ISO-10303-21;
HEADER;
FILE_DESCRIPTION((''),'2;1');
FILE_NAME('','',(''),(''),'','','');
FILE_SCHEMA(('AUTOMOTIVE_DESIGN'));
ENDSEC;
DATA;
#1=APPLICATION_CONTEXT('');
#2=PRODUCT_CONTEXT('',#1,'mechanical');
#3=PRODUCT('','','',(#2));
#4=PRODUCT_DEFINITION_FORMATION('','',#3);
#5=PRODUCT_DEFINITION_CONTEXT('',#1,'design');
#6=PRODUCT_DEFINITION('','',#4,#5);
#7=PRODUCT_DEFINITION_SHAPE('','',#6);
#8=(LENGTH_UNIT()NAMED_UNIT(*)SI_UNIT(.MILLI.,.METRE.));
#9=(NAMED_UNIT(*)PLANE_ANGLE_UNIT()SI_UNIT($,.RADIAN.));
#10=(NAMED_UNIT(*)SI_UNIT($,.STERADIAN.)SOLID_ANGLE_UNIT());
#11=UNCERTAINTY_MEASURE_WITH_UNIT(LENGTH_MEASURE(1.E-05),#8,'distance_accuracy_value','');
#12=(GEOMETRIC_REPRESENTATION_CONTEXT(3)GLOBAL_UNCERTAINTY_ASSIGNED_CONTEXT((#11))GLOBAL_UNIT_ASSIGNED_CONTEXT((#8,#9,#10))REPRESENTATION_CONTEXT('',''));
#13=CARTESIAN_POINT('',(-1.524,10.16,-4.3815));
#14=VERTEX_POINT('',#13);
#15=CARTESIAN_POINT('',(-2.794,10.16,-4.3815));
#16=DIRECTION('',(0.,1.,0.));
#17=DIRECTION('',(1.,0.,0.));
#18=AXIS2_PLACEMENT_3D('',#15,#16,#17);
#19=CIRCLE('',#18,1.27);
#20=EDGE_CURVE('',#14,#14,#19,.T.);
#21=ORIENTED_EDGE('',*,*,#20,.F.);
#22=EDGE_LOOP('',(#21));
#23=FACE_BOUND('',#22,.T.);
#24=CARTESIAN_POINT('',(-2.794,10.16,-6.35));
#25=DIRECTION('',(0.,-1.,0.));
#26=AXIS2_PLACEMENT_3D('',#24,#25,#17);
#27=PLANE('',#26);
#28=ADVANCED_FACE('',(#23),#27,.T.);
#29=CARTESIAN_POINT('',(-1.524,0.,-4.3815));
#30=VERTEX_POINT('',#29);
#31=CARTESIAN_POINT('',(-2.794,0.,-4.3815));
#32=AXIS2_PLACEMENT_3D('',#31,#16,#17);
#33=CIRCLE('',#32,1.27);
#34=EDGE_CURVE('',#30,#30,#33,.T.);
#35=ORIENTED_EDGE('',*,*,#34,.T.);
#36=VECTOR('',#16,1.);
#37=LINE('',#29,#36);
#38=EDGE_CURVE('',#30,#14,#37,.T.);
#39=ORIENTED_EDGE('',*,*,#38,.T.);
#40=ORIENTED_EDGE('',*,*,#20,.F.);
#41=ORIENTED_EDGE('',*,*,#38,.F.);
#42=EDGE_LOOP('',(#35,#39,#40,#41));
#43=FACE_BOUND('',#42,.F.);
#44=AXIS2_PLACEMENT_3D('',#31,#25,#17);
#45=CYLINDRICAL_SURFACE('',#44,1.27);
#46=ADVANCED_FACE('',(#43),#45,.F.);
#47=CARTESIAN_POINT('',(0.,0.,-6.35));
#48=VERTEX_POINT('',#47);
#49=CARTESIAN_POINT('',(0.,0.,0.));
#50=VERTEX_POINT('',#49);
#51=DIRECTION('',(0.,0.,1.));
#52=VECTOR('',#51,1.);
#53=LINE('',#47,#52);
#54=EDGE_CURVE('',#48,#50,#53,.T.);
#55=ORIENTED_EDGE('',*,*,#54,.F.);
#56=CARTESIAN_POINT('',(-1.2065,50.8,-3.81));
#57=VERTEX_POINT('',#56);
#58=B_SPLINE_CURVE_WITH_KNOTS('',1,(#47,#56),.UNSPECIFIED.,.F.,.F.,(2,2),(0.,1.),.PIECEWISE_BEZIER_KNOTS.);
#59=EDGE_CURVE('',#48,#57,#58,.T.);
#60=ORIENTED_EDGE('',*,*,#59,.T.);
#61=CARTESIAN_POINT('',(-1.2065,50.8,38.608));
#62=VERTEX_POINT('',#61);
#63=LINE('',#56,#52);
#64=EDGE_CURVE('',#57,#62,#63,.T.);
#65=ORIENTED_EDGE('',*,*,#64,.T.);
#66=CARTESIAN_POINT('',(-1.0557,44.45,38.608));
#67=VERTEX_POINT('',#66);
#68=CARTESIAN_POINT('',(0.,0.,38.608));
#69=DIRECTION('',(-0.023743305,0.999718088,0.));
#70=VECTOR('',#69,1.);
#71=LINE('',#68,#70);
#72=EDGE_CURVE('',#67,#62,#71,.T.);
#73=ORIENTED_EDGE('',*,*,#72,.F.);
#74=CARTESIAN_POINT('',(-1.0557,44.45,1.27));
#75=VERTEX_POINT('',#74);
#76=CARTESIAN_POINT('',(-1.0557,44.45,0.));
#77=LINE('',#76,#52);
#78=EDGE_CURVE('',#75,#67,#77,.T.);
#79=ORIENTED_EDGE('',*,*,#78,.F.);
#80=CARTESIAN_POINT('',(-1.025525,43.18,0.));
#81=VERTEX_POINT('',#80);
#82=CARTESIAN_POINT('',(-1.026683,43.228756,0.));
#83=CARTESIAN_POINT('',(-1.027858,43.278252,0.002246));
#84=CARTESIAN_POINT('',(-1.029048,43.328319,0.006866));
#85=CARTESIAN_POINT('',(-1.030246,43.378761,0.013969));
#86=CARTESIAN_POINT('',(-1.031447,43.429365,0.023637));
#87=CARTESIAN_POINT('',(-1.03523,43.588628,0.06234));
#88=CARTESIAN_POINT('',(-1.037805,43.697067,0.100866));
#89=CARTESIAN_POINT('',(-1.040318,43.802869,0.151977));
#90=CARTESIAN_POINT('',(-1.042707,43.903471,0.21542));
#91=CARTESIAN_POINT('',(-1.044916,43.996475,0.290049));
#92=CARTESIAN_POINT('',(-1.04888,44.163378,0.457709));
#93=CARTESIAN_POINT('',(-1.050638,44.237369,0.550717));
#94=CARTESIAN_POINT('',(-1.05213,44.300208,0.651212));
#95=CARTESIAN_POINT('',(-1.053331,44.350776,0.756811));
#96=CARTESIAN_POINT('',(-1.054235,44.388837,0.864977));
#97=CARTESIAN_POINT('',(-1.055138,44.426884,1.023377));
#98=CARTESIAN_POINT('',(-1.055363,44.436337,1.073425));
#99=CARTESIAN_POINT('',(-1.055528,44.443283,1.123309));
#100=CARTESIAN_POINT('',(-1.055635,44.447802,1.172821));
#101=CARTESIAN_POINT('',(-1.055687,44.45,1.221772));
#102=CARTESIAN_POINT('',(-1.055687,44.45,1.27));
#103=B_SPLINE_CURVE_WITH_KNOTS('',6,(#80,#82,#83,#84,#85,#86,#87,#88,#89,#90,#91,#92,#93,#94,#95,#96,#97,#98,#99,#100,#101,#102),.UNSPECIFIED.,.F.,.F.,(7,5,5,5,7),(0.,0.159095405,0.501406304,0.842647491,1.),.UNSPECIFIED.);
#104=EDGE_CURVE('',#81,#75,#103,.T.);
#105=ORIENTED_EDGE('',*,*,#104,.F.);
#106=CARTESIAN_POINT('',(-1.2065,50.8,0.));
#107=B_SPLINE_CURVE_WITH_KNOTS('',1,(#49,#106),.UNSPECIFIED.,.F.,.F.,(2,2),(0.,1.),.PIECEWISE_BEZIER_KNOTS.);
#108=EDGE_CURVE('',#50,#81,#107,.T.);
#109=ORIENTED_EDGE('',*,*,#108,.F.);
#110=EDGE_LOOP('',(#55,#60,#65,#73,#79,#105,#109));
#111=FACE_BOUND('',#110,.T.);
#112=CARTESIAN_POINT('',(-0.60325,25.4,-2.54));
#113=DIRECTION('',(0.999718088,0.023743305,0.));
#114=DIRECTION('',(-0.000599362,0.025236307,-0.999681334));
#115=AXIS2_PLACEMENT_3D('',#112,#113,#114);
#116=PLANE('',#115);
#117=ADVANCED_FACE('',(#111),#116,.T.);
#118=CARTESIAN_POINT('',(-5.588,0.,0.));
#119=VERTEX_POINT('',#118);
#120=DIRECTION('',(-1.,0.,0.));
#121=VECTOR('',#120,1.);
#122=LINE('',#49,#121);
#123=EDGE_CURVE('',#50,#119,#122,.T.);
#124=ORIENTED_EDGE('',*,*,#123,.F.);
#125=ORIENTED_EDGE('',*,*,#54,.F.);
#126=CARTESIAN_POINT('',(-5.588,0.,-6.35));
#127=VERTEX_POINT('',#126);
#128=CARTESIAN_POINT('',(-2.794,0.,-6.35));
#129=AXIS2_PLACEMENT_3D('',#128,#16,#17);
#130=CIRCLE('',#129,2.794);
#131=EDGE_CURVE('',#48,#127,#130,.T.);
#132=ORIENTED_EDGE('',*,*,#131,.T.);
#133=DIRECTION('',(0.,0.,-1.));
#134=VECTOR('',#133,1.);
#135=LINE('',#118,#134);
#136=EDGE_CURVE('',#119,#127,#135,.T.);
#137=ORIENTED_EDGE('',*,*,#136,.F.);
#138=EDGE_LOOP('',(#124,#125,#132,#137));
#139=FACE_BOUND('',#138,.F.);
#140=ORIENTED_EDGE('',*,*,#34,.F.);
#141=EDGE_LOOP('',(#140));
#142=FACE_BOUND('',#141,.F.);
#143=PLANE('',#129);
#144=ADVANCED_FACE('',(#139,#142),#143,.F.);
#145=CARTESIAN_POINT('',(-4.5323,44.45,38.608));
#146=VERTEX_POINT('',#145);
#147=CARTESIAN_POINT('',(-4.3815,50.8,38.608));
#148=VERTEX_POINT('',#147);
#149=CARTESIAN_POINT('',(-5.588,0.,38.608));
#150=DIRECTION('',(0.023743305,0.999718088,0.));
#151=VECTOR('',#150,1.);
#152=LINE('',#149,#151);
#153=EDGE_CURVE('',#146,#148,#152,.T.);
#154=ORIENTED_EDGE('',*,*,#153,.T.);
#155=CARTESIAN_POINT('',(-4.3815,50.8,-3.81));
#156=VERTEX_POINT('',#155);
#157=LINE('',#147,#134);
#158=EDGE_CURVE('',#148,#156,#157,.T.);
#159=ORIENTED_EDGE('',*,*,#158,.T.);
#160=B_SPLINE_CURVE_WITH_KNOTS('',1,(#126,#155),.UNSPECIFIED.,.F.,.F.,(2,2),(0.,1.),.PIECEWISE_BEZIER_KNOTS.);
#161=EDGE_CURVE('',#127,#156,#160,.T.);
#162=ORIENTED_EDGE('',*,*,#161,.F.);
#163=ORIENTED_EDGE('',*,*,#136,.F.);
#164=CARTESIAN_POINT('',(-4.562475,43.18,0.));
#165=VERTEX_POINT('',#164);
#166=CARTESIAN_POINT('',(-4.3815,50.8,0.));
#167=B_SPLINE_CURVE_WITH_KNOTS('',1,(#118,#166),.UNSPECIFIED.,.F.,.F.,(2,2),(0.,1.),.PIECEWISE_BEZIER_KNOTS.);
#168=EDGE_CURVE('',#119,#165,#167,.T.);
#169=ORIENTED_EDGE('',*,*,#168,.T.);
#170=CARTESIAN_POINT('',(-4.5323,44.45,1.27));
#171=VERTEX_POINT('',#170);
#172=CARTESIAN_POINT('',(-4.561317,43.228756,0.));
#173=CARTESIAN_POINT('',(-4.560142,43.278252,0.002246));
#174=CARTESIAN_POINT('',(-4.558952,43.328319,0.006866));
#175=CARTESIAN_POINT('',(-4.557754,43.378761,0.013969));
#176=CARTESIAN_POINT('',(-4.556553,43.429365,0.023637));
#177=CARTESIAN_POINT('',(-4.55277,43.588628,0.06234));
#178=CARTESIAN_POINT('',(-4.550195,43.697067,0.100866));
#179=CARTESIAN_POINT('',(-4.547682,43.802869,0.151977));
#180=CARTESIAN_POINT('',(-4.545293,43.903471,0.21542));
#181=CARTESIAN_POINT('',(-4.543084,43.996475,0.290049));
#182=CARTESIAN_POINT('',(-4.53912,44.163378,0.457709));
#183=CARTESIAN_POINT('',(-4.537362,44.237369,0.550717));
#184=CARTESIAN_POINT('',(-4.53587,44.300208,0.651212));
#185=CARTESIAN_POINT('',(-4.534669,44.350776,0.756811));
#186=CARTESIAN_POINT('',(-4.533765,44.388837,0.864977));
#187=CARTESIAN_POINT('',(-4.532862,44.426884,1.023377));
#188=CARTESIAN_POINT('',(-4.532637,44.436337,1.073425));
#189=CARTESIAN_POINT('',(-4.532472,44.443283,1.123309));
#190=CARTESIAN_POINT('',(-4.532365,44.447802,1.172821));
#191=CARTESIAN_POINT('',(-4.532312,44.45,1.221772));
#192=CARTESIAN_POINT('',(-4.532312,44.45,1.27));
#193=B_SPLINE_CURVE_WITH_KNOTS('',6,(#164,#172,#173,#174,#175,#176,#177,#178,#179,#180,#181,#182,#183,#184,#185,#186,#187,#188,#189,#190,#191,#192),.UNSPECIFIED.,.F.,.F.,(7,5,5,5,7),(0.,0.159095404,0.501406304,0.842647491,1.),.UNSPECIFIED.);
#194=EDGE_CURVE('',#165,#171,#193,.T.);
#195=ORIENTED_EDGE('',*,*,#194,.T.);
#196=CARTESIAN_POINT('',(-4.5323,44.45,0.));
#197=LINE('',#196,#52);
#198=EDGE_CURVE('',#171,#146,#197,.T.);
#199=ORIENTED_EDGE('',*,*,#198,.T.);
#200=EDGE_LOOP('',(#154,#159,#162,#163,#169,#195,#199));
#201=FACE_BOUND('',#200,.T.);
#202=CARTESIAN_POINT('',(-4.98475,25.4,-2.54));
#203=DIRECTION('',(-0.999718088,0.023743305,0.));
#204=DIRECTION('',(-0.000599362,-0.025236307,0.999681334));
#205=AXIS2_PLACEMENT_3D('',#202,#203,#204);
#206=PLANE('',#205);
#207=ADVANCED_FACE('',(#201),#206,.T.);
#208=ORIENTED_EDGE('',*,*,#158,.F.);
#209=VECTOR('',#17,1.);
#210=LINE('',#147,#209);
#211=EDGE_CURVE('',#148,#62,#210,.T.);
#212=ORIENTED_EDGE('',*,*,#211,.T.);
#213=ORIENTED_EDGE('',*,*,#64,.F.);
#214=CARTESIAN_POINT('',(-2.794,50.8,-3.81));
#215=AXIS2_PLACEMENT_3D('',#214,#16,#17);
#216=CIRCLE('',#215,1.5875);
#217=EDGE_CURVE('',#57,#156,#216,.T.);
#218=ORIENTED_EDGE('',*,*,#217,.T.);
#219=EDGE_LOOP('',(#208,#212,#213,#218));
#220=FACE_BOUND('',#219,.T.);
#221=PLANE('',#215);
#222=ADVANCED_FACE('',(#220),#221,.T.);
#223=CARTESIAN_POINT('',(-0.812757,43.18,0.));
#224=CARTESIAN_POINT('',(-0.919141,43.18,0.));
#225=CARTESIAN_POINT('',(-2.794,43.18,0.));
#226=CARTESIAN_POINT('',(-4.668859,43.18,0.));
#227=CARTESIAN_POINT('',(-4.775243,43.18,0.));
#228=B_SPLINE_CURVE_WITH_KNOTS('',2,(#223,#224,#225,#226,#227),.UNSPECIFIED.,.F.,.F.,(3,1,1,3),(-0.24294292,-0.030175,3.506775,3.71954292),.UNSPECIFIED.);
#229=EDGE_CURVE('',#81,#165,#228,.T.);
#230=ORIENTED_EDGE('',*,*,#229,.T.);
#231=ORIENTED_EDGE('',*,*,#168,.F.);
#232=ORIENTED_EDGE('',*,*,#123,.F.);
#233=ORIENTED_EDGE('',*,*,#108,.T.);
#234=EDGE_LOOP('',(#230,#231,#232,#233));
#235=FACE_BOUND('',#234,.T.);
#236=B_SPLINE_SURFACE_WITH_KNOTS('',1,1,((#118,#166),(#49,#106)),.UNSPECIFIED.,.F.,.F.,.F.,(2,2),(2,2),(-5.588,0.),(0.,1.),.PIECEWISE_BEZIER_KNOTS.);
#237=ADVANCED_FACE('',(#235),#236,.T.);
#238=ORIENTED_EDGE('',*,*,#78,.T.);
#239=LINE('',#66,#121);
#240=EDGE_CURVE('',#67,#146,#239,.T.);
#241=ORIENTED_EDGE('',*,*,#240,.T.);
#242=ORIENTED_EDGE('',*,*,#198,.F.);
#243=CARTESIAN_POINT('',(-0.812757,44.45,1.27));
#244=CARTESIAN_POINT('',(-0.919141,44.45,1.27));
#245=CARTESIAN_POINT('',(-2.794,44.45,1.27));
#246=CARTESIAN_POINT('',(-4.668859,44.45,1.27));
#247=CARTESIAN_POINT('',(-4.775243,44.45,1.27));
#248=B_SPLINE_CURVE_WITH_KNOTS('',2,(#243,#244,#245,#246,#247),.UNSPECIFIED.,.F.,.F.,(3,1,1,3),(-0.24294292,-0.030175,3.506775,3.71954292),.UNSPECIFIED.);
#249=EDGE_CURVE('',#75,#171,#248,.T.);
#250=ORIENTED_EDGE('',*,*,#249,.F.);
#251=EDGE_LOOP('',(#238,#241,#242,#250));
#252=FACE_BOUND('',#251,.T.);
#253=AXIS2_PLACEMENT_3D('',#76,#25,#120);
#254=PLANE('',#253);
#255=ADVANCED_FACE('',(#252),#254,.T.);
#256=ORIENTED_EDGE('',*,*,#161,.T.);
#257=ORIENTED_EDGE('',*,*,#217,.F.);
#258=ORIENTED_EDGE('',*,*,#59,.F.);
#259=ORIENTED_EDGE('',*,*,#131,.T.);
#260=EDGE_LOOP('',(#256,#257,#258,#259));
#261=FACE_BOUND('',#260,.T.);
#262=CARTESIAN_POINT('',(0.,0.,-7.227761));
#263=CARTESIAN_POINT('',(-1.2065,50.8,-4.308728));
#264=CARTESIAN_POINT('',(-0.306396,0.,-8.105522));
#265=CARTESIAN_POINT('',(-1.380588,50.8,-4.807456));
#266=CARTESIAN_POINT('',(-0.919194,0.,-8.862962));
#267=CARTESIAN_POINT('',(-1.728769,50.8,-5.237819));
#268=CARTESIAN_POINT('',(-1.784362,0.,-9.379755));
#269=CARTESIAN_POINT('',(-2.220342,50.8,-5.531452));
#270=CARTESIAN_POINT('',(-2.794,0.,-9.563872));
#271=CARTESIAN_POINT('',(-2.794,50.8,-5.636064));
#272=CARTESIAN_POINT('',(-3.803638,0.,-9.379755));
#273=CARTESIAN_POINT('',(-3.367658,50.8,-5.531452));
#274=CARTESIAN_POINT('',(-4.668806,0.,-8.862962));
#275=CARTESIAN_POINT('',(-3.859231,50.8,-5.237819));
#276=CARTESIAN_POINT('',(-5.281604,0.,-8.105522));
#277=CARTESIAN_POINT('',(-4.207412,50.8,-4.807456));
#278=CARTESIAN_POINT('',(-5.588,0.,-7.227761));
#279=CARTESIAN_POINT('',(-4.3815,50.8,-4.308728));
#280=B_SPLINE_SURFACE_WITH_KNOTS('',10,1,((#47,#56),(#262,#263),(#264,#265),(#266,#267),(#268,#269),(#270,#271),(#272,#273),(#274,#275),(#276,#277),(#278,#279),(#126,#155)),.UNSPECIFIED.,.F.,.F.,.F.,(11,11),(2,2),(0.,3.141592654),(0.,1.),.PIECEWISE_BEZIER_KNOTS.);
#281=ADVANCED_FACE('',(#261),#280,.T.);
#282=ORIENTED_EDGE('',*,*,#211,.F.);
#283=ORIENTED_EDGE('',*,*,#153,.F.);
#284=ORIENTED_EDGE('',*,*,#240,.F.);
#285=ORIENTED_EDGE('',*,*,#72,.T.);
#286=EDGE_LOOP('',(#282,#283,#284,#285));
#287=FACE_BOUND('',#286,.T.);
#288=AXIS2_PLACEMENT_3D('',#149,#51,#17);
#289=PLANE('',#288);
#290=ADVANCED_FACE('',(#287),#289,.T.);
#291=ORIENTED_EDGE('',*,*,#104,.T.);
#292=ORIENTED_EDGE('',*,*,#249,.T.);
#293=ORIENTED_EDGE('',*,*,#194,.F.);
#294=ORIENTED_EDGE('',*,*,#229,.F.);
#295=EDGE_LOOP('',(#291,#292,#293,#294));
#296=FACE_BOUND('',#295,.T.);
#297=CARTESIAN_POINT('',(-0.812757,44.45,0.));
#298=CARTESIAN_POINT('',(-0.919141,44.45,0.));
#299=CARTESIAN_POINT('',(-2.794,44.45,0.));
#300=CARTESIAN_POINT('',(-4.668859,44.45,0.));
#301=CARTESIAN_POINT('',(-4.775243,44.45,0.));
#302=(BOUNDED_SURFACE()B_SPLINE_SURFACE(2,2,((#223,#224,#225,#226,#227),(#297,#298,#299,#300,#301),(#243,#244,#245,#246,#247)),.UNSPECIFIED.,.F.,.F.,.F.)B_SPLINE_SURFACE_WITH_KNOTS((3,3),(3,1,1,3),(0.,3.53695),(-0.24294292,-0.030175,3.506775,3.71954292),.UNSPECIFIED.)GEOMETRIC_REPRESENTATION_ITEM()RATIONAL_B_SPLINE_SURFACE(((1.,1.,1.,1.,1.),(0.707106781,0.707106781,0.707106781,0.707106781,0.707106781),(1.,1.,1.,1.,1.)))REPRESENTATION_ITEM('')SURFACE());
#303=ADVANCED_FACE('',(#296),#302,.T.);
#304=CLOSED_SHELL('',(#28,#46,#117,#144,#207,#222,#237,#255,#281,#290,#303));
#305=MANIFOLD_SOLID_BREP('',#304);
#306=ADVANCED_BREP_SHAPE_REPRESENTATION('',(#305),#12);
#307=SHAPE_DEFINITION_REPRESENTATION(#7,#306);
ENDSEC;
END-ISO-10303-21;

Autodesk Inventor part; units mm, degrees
ref_plane "YZ Plane" through (0, 0, 0) normal (1, 0, 0) x (0, 1, 0)
ref_plane "XY Plane" through (0, 0, 0) normal (0, 0, 1) x (1, 0, 0)
sketch "Sketch6" plane through (0, 0, 0) normal (0, 1, 0) x (-1, 0, 0)
  line L0 (0, 0) -> (5.588, 0)
  line L1 (5.588, 0) -> (5.588, -6.35)
  line L2 (5.588, -6.35) -> (0, -6.35)
  line L3 (0, -6.35) -> (0, 0)
  arc A0 (0, -6.35) -> (5.588, -6.35) centre (2.794, -6.35) ccw
  dimension "d25" = 5.588
  dimension "d26" = 6.35
ref_plane "Work Plane1" through (0, 50.8, 0) normal (0, 1, 0) x (-1, 0, 0)
sketch "Sketch8" plane through (0, 50.8, 0) normal (0, 1, 0) x (-1, 0, 0)
  line L0 (4.3815, 0) -> (1.2065, 0)
  line L1 (1.2065, 0) -> (1.2065, -3.81)
  line L2 (1.2065, -3.81) -> (4.3815, -3.81)
  line L3 (4.3815, -3.81) -> (4.3815, 0)
  arc A0 (1.2065, -3.81) -> (4.3815, -3.81) centre (2.794, -3.81) ccw
  point P0 (0, 0)
  dimension "d27" = 3.175
  dimension "d28" = 3.81
  dimension "d49" = 1.2065
loft "Loft1" add profiles "Sketch6", "Sketch8"
sketch "Sketch9" plane through (-5.588, 0, 0) normal (0, 0, 1) x (1, 0, 0)
  line L0 (0, 0) -> (5.588, 0) projected
  line L1 (5.588, 0) -> (4.3815, 50.8) projected
  line L2 (1.2065, 50.8) -> (4.3815, 50.8) projected
  line L3 (0, 0) -> (1.2065, 50.8) projected
  line L4 (4.3815, 50.8) -> (5.588, 0) projected
  line L5 (4.5323, 44.45) -> (1.0557, 44.45)
  line L6 (0, 0) -> (1.2065, 50.8) projected
  dimension "d34" = 6.35
extrude "Extrusion5" add sketch "Sketch9" along normal blind 38.608 contours L3 L2 L1 L5
sketch "Sketch12" plane through (-2.794, 0, -6.35) normal (0, -1, 0) x (1, 0, 0)
  circle A0 centre (0, 1.9685) radius 1.27
  arc A1 (-2.794, 0) -> (2.794, 0) centre (0, 0) ccw projected
  line L0 (0, -2.794) -> (0, 1.9685)
  point P0 (2.794, 6.35)
  dimension "d44" = 2.54
  dimension "d46" = 4.7625
extrude "Extrusion8" cut sketch "Sketch12" against normal blind 10.16
fillet "Fillet3" radius 1.27 1 edges at (-2.794, 44.45, 0)
properties part number "RudderStabilizingFins"
